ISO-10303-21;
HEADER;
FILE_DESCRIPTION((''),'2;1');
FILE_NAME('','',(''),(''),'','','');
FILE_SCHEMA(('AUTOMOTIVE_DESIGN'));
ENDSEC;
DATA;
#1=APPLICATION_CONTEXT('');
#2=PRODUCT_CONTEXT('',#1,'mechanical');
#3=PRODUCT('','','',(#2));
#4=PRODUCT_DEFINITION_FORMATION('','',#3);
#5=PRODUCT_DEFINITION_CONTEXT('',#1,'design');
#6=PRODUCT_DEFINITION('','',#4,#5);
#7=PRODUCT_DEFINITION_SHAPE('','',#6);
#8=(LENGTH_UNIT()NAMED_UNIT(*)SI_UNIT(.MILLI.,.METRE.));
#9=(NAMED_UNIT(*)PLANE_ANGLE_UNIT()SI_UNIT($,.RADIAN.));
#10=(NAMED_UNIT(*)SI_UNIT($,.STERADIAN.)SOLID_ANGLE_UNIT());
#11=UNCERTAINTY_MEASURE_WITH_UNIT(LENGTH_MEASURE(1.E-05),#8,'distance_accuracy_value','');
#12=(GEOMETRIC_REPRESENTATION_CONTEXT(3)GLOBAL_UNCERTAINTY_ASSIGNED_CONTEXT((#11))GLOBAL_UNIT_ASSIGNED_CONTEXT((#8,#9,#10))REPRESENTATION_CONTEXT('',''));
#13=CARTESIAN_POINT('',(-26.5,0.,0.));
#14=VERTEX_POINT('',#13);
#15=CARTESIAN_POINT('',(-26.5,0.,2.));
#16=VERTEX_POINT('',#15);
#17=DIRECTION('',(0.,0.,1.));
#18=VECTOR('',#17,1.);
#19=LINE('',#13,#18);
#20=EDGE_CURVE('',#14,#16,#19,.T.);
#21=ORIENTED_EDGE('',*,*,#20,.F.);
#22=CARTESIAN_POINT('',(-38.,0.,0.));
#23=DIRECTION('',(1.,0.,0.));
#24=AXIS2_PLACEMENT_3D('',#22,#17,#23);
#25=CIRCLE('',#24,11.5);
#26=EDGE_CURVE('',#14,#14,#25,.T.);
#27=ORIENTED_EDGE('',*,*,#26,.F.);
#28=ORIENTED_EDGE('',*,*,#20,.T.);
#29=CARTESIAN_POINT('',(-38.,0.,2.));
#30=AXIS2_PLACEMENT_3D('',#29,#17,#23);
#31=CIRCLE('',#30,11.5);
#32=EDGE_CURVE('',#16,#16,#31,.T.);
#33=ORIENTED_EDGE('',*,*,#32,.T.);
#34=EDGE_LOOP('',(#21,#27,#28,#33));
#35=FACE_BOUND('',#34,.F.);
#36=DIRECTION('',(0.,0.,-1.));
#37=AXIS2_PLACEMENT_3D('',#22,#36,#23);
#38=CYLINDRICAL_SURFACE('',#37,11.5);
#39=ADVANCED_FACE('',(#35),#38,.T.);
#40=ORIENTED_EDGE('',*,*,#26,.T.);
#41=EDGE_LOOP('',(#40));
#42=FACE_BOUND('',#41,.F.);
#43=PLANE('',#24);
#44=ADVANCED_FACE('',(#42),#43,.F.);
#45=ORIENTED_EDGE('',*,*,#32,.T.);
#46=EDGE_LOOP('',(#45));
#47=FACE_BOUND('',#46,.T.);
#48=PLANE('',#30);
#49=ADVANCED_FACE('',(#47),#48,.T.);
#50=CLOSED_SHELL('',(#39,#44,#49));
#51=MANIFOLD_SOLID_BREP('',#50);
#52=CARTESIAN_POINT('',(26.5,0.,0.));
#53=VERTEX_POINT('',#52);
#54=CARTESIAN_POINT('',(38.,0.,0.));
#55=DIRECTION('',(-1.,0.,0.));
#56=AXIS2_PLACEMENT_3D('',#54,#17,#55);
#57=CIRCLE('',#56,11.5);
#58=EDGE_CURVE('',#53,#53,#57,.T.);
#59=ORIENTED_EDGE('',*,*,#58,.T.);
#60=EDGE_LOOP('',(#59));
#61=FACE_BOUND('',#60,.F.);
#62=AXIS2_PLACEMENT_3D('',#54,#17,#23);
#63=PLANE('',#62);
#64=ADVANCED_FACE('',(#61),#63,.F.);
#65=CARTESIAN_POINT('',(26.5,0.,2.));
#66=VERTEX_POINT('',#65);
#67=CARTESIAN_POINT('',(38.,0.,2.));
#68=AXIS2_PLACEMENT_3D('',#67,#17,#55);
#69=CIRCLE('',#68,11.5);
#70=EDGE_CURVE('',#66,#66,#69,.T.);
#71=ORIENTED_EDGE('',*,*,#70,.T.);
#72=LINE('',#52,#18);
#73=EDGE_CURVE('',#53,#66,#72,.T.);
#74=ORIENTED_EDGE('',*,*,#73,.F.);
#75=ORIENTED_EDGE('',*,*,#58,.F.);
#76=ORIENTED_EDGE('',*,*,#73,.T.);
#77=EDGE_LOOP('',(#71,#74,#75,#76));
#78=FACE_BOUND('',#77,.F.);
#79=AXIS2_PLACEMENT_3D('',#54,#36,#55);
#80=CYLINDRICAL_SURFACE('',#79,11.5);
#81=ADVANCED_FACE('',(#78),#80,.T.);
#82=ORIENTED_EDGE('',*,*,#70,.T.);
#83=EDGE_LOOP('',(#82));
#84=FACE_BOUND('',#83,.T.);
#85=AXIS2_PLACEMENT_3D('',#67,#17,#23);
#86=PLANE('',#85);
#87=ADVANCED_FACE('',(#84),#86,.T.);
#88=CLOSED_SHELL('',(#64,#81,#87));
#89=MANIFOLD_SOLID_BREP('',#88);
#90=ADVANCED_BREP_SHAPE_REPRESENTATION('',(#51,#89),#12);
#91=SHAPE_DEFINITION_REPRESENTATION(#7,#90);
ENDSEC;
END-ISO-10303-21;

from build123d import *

# Parameters (mm, degrees)
F1_DEPTH = 2
F0_R     = 11.5
F0_R_2   = 4


# Not quite as in the source:
# - the program builds the solid bodies; features that only make, move or delete a surface that nothing else refers to are left out


with BuildPart() as f1:
    # F0 (on Top) → F1 (new body)
    with BuildSketch(Plane.XY):
        with BuildLine():
            ThreePointArc((49.5, 0), (38, 11.5), (26.5, 0))
            ThreePointArc((26.5, 0), (38, -11.5), (49.5, 0))
        make_face()
        with BuildLine():
            ThreePointArc((42, 0), (38, -4), (34, 0))
            ThreePointArc((34, 0), (38, 4), (42, 0))
        make_face(mode=Mode.SUBTRACT)
        with BuildLine():
            ThreePointArc((42, 0), (38, 4), (34, 0))
            ThreePointArc((34, 0), (38, -4), (42, 0))
        make_face()
    extrude(amount=F1_DEPTH)


with BuildPart() as f1b:
    # F0 (on Top) → F1, piece 2 (new body)
    with BuildSketch(Plane.XY):
        with Locations((-38, 0)):
            Circle(F0_R)
        with Locations((-38, 0)):
            Circle(F0_R_2, mode=Mode.SUBTRACT)
        with Locations((-38, 0)):
            Circle(F0_R_2)
    extrude(amount=F1_DEPTH)


solid = Compound([f1.part, f1b.part])
